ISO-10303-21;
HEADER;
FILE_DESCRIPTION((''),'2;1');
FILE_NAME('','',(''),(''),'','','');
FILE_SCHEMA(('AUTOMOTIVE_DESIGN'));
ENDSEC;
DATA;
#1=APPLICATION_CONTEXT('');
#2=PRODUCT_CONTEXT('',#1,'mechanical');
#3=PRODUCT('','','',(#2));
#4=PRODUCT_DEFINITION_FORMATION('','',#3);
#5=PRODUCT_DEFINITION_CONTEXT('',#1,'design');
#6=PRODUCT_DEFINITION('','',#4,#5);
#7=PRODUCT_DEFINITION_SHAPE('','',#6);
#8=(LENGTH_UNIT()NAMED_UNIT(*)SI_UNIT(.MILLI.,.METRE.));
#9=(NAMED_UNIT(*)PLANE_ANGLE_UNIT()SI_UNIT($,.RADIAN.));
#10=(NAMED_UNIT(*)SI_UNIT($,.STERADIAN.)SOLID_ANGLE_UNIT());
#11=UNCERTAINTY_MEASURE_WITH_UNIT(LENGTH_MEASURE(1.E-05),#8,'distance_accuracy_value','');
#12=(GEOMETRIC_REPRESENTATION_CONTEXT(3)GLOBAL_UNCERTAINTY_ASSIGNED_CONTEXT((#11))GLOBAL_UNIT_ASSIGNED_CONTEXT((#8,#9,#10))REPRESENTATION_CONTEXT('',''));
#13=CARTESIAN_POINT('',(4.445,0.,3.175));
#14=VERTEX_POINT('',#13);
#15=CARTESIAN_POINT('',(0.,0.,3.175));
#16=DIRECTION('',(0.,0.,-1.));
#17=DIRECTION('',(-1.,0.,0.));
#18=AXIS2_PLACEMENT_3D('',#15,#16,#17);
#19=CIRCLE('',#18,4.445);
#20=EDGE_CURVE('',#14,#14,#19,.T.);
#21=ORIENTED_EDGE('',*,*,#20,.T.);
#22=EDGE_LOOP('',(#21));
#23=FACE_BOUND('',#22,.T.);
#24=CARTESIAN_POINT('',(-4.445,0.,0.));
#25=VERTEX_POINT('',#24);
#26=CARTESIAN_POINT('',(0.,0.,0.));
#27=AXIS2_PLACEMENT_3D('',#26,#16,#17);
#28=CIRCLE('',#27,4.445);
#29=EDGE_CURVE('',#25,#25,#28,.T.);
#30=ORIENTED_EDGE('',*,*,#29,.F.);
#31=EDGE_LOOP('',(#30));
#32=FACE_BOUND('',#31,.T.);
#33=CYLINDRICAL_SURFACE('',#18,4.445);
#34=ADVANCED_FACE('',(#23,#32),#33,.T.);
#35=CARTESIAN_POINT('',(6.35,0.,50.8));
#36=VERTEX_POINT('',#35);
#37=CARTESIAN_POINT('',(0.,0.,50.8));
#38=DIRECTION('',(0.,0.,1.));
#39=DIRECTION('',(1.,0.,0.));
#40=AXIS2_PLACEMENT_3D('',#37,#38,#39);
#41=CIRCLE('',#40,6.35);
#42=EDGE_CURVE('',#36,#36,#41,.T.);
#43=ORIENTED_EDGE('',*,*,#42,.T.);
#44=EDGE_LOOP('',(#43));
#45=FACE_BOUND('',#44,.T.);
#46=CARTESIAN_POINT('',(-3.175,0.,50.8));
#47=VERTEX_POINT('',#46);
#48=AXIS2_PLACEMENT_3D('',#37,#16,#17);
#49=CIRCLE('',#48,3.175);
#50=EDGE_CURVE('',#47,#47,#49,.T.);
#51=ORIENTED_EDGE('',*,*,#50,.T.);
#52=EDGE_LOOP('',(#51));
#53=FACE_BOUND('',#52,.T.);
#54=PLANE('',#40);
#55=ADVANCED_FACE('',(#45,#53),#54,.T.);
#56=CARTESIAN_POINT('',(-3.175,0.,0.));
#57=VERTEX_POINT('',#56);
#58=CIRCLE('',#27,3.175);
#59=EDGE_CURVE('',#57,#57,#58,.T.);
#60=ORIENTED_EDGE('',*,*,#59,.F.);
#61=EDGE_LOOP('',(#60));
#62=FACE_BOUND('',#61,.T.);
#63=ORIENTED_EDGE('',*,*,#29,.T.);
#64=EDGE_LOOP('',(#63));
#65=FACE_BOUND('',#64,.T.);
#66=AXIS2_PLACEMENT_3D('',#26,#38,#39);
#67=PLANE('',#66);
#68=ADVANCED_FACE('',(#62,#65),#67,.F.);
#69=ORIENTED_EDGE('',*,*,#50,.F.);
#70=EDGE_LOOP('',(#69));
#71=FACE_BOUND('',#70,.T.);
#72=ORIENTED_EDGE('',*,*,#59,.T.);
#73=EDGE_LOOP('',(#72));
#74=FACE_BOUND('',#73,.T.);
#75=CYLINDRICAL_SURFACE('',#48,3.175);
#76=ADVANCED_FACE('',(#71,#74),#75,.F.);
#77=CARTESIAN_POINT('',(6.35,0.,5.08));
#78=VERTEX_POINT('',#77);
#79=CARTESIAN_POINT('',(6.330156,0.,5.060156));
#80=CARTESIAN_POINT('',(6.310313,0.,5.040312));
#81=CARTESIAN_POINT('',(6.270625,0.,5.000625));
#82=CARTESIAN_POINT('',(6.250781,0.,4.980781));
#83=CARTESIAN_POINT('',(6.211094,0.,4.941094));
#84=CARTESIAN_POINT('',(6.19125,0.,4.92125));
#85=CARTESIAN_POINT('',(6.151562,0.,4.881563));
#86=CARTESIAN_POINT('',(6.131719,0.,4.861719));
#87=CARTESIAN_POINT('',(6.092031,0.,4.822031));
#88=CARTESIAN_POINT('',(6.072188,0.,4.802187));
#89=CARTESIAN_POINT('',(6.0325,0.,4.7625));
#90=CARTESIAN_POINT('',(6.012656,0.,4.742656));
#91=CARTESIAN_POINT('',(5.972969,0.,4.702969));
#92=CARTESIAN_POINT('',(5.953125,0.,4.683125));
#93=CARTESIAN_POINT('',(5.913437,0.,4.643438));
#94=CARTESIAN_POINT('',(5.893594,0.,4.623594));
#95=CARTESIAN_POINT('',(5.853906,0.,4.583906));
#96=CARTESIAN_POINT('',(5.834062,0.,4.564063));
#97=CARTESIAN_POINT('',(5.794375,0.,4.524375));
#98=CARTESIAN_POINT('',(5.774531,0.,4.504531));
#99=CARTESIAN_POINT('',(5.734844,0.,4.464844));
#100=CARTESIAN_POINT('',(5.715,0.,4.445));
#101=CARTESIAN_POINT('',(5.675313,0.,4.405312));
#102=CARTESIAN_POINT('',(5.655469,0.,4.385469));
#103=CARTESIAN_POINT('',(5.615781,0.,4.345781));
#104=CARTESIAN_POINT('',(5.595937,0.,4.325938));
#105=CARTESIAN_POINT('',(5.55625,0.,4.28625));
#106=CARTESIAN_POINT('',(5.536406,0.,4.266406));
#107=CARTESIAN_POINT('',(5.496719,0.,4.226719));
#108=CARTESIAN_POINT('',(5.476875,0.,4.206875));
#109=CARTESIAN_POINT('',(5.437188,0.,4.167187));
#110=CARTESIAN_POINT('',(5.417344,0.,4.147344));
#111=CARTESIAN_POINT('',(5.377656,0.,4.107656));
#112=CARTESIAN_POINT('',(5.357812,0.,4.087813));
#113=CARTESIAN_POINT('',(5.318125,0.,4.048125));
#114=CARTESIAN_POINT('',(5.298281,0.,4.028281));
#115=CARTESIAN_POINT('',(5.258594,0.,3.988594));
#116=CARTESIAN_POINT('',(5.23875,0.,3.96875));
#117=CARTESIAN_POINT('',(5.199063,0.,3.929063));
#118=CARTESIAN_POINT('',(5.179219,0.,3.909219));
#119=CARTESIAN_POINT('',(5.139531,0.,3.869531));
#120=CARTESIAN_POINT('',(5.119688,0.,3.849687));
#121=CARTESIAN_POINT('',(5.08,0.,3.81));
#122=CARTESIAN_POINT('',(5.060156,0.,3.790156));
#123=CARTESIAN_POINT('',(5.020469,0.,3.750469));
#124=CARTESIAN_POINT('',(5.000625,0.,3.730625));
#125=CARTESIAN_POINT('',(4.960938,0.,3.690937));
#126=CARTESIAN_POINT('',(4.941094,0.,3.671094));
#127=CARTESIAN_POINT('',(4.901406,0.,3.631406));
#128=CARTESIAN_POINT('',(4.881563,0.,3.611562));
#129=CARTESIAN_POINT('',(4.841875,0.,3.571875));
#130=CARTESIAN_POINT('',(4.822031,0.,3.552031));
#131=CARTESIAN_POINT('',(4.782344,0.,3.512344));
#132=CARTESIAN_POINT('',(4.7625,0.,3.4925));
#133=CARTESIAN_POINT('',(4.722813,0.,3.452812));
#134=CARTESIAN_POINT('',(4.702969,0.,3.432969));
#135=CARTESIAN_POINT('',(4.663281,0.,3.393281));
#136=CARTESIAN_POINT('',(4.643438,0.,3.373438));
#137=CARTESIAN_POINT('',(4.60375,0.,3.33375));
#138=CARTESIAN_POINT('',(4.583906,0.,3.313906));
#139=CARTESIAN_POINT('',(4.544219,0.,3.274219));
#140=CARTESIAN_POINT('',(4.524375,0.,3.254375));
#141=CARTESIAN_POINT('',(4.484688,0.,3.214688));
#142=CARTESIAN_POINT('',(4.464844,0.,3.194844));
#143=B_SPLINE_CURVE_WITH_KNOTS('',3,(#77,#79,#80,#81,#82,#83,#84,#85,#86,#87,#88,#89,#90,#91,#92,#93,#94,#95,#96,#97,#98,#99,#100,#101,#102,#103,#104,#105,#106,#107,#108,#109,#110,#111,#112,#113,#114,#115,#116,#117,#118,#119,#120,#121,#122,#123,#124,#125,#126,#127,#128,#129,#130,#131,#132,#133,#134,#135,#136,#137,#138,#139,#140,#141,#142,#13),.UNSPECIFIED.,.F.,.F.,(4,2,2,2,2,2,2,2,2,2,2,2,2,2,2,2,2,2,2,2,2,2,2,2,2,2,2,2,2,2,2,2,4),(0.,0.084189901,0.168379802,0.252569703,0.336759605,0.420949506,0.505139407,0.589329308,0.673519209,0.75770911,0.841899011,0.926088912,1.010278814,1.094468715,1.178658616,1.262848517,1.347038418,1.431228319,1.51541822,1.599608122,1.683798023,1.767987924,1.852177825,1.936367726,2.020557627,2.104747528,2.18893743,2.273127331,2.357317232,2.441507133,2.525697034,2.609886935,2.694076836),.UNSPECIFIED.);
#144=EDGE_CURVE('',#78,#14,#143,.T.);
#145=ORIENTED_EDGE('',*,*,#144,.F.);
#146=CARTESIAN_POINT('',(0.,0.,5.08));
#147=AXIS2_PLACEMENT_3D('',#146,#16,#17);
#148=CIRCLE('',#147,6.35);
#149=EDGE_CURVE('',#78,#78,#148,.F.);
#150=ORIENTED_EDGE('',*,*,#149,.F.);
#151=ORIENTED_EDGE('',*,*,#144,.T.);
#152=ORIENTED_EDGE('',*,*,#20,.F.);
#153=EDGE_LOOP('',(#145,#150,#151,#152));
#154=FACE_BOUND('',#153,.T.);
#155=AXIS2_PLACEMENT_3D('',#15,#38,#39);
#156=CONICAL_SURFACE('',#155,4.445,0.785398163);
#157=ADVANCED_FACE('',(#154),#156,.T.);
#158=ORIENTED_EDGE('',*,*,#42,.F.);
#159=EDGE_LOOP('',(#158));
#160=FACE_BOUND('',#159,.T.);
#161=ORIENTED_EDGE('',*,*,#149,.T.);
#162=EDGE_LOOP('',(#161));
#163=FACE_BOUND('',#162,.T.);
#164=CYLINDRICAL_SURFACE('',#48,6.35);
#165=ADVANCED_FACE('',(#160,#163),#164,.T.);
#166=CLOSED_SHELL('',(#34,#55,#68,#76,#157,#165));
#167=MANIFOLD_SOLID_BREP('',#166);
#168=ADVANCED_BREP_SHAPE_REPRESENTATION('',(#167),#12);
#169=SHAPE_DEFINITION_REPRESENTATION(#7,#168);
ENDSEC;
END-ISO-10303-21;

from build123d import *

# Parameters (mm, degrees)
SKETCH1_R           = 6.35
BOSS_EXTRUDE1_DEPTH = 50.8
SKETCH2_R           = 6.35
SKETCH2_R_2         = 4.445
CUT_EXTRUDE1_DEPTH  = 3.175
CHAMFER1_SIZE       = 1.905
SKETCH3_R           = 3.175
CUT_EXTRUDE2_DEPTH  = 52.587643869


with BuildPart() as part:
    # Sketch1 → Boss-Extrude1 (new body)
    with BuildSketch(Plane.XY):
        Circle(SKETCH1_R)
    extrude(amount=BOSS_EXTRUDE1_DEPTH)

    # Sketch2 → Cut-Extrude1 (cut)
    with BuildSketch(Plane(origin=(0, 0, 0), x_dir=(-1, 0, 0), z_dir=(0, 0, -1))):
        Circle(SKETCH2_R)
        Circle(SKETCH2_R_2, mode=Mode.SUBTRACT)
    extrude(amount=-CUT_EXTRUDE1_DEPTH, mode=Mode.SUBTRACT)

    # Chamfer1
    chamfer1_edges = [part.edges().sort_by_distance(p)[0] for p in [
        (-6.35, 0, 3.175),
    ]]
    chamfer(chamfer1_edges, length=CHAMFER1_SIZE - 0.0001)  # a hair under: the kernel refuses the full size

    # Sketch3 → Cut-Extrude2 (cut, through all)
    with BuildSketch(Plane(origin=(0, 0, 0), x_dir=(-1, 0, 0), z_dir=(0, 0, -1))):
        Circle(SKETCH3_R)
    extrude(amount=-CUT_EXTRUDE2_DEPTH, mode=Mode.SUBTRACT)


solid = part.part
